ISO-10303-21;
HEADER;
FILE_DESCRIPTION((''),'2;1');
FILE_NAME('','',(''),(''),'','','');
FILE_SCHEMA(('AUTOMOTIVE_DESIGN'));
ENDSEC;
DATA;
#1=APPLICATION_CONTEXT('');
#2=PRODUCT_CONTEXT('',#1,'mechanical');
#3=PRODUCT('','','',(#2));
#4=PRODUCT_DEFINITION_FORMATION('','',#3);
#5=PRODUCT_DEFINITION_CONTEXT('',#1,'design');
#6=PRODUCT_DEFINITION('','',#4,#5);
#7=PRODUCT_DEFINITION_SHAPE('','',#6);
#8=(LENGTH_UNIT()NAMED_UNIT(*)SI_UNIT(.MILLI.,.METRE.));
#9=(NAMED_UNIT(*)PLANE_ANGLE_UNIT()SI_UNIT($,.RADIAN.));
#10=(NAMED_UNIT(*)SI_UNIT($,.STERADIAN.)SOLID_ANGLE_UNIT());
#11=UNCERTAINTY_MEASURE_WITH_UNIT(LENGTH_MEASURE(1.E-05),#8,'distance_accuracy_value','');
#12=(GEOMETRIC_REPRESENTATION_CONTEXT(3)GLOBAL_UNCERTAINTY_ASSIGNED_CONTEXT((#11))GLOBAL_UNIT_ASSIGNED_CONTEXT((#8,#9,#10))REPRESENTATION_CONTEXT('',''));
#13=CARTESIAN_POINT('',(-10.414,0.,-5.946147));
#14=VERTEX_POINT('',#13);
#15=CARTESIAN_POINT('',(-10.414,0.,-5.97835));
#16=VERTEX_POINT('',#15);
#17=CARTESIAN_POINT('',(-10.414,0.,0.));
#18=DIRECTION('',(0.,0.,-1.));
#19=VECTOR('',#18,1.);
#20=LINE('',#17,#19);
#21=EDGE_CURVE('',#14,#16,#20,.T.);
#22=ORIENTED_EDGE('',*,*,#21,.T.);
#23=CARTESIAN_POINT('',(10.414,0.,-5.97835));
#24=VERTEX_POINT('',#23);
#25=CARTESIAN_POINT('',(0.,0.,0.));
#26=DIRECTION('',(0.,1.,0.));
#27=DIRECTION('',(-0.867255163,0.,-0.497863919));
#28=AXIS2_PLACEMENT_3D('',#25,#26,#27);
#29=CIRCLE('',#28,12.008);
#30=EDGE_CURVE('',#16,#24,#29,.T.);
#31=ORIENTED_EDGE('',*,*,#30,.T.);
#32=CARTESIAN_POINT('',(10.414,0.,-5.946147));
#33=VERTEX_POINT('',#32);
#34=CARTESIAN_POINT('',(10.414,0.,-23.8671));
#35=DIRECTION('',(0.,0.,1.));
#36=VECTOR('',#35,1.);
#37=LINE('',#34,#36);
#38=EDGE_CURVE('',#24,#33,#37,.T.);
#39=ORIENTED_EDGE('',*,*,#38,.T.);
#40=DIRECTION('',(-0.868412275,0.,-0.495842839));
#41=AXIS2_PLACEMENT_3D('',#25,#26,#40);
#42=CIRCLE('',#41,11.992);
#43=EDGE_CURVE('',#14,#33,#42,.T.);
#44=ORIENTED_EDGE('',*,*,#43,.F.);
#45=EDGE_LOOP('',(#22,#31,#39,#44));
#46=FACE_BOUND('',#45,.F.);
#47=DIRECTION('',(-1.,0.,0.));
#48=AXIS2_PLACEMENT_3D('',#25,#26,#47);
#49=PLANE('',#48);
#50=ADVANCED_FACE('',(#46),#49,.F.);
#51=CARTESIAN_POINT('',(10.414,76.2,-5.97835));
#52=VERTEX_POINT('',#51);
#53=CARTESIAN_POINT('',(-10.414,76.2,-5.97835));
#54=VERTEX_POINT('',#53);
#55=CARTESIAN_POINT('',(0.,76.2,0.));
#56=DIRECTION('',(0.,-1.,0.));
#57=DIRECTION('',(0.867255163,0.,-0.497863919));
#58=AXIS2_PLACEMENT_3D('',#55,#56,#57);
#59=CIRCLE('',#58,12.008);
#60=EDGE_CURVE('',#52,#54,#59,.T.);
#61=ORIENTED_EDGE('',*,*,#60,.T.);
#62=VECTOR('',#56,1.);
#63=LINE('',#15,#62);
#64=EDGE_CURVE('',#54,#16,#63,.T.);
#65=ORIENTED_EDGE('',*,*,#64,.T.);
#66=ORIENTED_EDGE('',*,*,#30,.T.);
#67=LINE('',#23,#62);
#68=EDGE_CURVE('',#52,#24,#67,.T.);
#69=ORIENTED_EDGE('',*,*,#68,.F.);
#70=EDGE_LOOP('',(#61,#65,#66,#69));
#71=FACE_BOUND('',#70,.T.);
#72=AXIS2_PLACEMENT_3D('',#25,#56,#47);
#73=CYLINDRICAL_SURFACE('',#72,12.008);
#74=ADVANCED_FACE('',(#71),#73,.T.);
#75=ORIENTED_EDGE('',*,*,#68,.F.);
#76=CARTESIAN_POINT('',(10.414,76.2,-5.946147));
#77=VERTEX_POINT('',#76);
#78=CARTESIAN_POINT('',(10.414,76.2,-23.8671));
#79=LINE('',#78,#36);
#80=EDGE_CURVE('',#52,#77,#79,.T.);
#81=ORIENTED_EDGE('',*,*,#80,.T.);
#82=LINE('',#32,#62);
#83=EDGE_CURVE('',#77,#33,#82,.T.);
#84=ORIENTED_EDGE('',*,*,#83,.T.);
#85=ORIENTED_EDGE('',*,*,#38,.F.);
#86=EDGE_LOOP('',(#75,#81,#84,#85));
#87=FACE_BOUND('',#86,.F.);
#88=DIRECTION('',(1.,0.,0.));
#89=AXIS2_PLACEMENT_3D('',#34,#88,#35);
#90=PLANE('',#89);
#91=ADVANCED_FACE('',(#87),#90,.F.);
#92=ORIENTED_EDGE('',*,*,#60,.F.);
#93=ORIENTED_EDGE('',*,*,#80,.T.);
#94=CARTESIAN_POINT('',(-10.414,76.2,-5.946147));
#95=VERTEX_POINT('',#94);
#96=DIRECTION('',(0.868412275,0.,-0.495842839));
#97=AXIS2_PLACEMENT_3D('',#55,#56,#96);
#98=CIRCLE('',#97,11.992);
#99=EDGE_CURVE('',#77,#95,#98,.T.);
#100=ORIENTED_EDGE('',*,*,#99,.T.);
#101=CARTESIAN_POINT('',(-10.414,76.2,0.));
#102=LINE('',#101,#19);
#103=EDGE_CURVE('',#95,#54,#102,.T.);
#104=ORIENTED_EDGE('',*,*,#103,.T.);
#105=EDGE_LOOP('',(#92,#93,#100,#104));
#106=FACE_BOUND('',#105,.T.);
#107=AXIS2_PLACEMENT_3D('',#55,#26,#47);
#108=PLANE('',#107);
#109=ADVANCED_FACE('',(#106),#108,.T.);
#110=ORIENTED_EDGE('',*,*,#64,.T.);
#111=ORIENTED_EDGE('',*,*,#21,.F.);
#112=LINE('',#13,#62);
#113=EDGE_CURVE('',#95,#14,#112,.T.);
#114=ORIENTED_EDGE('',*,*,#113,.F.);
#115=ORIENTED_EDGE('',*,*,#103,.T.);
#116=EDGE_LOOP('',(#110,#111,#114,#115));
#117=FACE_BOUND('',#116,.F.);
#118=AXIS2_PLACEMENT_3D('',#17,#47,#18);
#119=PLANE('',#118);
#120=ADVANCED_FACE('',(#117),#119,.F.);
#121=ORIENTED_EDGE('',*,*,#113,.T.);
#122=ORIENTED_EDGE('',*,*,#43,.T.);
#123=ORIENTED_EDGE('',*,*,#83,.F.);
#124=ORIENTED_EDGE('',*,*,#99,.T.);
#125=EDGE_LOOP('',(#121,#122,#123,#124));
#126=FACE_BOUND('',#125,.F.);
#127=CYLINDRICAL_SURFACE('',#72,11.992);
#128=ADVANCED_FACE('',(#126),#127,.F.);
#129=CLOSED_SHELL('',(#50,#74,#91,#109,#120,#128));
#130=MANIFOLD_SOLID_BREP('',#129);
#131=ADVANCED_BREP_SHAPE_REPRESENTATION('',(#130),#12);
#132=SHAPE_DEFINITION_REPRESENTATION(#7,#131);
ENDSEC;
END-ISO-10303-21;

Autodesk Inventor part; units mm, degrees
ref_plane "YZ Plane" through (0, 0, 0) normal (1, 0, 0) x (0, 1, 0)
ref_plane "XZ Plane" through (0, 0, 0) normal (0, 1, 0) x (-1, 0, 0)
ref_plane "XY Plane" through (0, 0, 0) normal (0, 0, 1) x (1, 0, 0)
sketch "Sketch1" plane through (0, 0, 0) normal (0, 1, 0) x (-1, 0, 0)
  circle A0 centre (0, 0) radius 12
  circle A1 centre (0, 0) radius 12.008
  dimension "d0" = 24
  dimension "d1" = 24.016
extrude "Extrusion1" add sketch "Sketch1" along normal blind 76.2 contours A0 | A1
shell "Shell1" thickness 0.016 removed faces 2 at (3.8864, 76.2, 0.9579) at (3.8864, 0, 0.9579)
sketch "Sketch2" plane through (0, 0, 0) normal (0, 1, 0) x (-1, 0, 0)
  line L0 (0, 0) -> (10.414, 0)
  line L1 (10.414, 0) -> (10.414, -23.8671)
  line L2 (10.414, -23.8671) -> (-10.414, -23.8671)
  line L3 (-10.414, -23.8671) -> (-10.414, 0)
  line L4 (-10.414, 0) -> (0, 0)
  dimension "d5" = 10.414
  dimension "d6" = 20.828
extrude "Extrusion2" cut sketch "Sketch2" along normal blind 76.2
properties part number "DPLX_P015_Foil_Wrap_SG"
